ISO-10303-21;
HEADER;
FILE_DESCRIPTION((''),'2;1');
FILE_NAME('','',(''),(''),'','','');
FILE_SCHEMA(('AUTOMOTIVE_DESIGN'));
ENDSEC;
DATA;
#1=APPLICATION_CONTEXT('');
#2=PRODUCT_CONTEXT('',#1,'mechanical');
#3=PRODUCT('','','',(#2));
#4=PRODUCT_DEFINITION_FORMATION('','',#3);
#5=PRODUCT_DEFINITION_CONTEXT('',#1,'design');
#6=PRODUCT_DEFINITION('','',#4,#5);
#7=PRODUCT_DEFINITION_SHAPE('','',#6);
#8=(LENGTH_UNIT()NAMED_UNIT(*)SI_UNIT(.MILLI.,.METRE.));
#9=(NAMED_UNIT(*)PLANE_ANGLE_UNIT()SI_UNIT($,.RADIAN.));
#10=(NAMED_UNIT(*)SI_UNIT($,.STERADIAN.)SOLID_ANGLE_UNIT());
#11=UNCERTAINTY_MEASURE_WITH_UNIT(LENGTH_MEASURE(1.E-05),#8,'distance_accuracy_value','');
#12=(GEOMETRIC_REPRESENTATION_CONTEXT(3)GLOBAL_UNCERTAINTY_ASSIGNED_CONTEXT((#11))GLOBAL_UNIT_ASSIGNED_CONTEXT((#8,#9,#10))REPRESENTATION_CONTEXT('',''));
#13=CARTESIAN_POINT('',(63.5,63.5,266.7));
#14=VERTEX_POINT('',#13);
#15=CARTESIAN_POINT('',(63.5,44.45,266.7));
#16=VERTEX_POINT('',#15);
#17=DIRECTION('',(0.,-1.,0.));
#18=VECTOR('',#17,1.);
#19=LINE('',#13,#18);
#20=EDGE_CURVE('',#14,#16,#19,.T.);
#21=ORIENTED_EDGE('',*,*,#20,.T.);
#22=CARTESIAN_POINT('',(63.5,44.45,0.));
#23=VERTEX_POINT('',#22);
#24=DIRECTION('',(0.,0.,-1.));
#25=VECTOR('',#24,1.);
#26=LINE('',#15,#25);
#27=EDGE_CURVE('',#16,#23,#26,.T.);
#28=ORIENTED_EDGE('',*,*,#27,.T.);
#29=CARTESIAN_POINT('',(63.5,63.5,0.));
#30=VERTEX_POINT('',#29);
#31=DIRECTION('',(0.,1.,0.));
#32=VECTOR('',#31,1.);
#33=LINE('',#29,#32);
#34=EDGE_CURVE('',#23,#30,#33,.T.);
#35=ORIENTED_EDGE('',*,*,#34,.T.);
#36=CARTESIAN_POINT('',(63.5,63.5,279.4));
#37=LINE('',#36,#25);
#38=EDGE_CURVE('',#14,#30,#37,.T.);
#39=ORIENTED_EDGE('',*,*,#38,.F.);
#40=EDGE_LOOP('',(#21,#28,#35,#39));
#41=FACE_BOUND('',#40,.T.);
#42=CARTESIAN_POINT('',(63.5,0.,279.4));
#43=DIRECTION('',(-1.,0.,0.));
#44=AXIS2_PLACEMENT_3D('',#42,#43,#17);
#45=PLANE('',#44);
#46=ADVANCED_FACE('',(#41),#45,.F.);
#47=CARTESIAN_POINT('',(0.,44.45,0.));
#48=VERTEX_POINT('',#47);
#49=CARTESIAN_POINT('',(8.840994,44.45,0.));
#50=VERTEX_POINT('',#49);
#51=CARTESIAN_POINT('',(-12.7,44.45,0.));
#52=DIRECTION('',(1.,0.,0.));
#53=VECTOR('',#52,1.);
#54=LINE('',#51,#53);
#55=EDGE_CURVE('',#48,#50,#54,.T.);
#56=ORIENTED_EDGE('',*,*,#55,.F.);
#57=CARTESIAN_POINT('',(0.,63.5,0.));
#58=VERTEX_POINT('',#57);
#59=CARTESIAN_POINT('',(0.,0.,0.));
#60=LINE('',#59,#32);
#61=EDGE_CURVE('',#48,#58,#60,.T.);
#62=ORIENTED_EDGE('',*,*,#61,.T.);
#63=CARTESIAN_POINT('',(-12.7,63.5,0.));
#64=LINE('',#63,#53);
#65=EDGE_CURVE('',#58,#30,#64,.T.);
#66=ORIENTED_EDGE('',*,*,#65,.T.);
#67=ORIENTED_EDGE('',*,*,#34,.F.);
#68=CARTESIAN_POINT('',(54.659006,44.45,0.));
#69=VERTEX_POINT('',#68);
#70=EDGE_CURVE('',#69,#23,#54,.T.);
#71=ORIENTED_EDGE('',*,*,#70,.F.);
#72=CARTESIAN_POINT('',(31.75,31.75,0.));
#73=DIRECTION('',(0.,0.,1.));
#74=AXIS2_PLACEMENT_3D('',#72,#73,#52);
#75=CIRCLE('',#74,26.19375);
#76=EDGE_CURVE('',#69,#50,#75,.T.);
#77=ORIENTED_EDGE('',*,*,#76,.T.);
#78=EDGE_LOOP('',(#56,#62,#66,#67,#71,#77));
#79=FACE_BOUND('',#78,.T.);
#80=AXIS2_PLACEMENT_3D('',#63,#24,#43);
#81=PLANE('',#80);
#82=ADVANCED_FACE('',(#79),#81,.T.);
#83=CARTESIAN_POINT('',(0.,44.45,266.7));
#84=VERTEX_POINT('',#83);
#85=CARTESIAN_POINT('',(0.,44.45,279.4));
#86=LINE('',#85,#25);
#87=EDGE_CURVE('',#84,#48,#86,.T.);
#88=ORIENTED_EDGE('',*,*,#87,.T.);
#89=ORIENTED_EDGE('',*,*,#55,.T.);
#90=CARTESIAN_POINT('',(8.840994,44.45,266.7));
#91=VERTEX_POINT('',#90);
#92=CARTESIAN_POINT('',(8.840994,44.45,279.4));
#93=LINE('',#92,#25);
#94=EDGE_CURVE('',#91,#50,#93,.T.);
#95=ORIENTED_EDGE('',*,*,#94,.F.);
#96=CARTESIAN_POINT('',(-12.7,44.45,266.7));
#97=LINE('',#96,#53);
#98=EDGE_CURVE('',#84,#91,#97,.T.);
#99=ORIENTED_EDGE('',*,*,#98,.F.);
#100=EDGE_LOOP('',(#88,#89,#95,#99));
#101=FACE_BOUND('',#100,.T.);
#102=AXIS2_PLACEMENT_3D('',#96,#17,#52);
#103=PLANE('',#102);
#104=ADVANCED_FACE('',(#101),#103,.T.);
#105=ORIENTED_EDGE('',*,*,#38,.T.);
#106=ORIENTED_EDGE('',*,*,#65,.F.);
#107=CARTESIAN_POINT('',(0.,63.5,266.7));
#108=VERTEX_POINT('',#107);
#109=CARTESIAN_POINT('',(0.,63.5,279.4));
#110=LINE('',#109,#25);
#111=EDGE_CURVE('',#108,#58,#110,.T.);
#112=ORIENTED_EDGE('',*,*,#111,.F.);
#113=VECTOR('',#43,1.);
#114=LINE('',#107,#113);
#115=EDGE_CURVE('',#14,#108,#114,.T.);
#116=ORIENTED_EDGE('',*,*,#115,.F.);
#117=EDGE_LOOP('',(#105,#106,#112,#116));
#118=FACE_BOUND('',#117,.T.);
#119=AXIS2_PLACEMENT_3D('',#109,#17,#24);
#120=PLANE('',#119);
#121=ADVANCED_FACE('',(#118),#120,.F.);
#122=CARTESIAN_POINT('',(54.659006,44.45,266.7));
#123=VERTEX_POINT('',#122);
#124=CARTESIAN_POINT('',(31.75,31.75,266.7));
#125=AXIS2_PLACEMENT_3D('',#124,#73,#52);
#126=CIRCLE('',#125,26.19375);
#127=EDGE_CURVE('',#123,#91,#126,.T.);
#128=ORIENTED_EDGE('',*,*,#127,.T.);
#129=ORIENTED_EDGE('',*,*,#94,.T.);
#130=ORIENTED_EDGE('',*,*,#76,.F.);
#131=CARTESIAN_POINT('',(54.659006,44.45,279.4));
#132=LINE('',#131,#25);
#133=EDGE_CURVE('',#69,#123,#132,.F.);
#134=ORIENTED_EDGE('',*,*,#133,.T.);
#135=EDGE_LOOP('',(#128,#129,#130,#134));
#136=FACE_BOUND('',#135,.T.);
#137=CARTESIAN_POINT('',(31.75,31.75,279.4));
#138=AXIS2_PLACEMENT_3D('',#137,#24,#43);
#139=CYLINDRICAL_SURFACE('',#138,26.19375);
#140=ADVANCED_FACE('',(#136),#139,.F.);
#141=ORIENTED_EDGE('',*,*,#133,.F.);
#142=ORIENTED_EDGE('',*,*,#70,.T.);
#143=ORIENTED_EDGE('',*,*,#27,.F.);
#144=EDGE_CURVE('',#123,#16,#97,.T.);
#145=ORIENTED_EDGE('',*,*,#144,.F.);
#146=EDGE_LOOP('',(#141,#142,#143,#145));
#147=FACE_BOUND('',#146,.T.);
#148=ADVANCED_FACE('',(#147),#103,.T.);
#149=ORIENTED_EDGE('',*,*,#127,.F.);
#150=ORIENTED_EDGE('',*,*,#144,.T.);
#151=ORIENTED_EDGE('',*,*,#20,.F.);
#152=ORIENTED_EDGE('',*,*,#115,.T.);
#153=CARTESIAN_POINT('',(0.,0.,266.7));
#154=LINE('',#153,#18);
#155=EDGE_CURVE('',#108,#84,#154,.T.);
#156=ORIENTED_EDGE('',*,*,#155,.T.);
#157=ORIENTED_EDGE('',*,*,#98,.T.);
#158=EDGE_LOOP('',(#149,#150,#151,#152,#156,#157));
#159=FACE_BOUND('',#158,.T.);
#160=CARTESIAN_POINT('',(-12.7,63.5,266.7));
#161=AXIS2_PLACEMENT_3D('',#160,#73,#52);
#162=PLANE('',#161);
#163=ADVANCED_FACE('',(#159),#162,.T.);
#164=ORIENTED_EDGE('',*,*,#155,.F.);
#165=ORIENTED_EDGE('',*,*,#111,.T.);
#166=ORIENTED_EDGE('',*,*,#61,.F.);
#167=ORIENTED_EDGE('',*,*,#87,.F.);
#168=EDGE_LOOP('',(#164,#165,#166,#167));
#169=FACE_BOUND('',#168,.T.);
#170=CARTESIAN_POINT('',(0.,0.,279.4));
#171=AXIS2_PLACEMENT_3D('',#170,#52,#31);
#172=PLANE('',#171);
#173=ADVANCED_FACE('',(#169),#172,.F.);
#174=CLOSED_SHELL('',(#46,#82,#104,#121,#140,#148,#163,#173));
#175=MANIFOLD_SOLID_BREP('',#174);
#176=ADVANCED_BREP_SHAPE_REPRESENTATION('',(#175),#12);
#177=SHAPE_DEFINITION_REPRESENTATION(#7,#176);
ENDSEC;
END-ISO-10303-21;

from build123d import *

# Parameters (mm, degrees)
SKETCH2_W           = 63.5
SKETCH2_H           = 63.5
SKETCH2_R           = 26.19375
BOSS_EXTRUDE1_DEPTH = 279.4
BOSS_EXTRUDE2_START = -12.7
SKETCH3_W           = 88.9
SKETCH3_H           = 88.9
SKETCH3_R           = 26.19375
BOSS_EXTRUDE2_DEPTH = 12.7
SKETCH4_W           = 63.5
SKETCH4_H           = 63.5
SKETCH4_R           = 23.114
BOSS_EXTRUDE3_DEPTH = 12.7
SKETCH5_R           = 23.114
SKETCH5_R_2         = 19.05
BOSS_EXTRUDE4_DEPTH = 6.35
CUT_EXTRUDE4_START  = -76.2
CUT_EXTRUDE4_DEPTH  = 88.9


# Read off the part's stored shape, not the designer's step: Cut-Extrude4
with BuildPart() as part:
    # Sketch2 → Boss-Extrude1 (new body)
    with BuildSketch(Plane.XY):
        with Locations((31.75, 31.75)):
            Rectangle(SKETCH2_W, SKETCH2_H)
        with Locations((31.75, 31.75)):
            Circle(SKETCH2_R, mode=Mode.SUBTRACT)
    extrude(amount=BOSS_EXTRUDE1_DEPTH)

    # Sketch3 → Boss-Extrude2 (add)
    with BuildSketch(Plane.XY.offset(279.4).offset(BOSS_EXTRUDE2_START)):
        with Locations((31.75, 31.75)):
            Rectangle(SKETCH3_W, SKETCH3_H)
        with Locations((31.75, 31.75)):
            Circle(SKETCH3_R, mode=Mode.SUBTRACT)
    extrude(amount=BOSS_EXTRUDE2_DEPTH)

    # Sketch4 → Boss-Extrude3 (add)
    with BuildSketch(Plane(origin=(0, 0, 0), x_dir=(-1, 0, 0), z_dir=(0, 0, -1))):
        with Locations((-31.75, 31.75)):
            Rectangle(SKETCH4_W, SKETCH4_H)
        with Locations((-31.75, 31.75)):
            Circle(SKETCH4_R, mode=Mode.SUBTRACT)
    extrude(amount=BOSS_EXTRUDE3_DEPTH)


with BuildPart() as body_2:
    # Sketch5 → Boss-Extrude4 (new body)
    with BuildSketch(Plane(origin=(0, 0, -6.35), x_dir=(-1, 0, 0), z_dir=(0, 0, -1))):
        with Locations((-31.75, 31.75)):
            Circle(SKETCH5_R)
        with Locations((-31.75, 31.75)):
            Circle(SKETCH5_R_2, mode=Mode.SUBTRACT)
    extrude(amount=-BOSS_EXTRUDE4_DEPTH)


with BuildPart() as cut_extrude4_tool:
    # Cut-Extrude4 outline → Cut-Extrude4 (new body)
    with BuildSketch(Plane(origin=(63.5, 0, 0), x_dir=(0, 0, -1), z_dir=(1, 0, 0)).offset(CUT_EXTRUDE4_START)):
        Polygon((-266.7, 44.45), (-266.7, 76.2), (-279.4, 76.2), (-279.4, -12.7), (-266.7, -12.7), (-266.7, 0), (12.7, 0), (12.7, 63.5), (0, 63.5), (0, 44.45), align=None)
    extrude(amount=CUT_EXTRUDE4_DEPTH)


with BuildPart() as part_1:
    add(part.part)

    # Cut-Extrude4: cut by cut_extrude4_tool
    add(cut_extrude4_tool.part, mode=Mode.SUBTRACT)


with BuildPart() as body_2_1:
    add(body_2.part)

    # Cut-Extrude4: cut by cut_extrude4_tool
    add(cut_extrude4_tool.part, mode=Mode.SUBTRACT)


solid = part_1.part
